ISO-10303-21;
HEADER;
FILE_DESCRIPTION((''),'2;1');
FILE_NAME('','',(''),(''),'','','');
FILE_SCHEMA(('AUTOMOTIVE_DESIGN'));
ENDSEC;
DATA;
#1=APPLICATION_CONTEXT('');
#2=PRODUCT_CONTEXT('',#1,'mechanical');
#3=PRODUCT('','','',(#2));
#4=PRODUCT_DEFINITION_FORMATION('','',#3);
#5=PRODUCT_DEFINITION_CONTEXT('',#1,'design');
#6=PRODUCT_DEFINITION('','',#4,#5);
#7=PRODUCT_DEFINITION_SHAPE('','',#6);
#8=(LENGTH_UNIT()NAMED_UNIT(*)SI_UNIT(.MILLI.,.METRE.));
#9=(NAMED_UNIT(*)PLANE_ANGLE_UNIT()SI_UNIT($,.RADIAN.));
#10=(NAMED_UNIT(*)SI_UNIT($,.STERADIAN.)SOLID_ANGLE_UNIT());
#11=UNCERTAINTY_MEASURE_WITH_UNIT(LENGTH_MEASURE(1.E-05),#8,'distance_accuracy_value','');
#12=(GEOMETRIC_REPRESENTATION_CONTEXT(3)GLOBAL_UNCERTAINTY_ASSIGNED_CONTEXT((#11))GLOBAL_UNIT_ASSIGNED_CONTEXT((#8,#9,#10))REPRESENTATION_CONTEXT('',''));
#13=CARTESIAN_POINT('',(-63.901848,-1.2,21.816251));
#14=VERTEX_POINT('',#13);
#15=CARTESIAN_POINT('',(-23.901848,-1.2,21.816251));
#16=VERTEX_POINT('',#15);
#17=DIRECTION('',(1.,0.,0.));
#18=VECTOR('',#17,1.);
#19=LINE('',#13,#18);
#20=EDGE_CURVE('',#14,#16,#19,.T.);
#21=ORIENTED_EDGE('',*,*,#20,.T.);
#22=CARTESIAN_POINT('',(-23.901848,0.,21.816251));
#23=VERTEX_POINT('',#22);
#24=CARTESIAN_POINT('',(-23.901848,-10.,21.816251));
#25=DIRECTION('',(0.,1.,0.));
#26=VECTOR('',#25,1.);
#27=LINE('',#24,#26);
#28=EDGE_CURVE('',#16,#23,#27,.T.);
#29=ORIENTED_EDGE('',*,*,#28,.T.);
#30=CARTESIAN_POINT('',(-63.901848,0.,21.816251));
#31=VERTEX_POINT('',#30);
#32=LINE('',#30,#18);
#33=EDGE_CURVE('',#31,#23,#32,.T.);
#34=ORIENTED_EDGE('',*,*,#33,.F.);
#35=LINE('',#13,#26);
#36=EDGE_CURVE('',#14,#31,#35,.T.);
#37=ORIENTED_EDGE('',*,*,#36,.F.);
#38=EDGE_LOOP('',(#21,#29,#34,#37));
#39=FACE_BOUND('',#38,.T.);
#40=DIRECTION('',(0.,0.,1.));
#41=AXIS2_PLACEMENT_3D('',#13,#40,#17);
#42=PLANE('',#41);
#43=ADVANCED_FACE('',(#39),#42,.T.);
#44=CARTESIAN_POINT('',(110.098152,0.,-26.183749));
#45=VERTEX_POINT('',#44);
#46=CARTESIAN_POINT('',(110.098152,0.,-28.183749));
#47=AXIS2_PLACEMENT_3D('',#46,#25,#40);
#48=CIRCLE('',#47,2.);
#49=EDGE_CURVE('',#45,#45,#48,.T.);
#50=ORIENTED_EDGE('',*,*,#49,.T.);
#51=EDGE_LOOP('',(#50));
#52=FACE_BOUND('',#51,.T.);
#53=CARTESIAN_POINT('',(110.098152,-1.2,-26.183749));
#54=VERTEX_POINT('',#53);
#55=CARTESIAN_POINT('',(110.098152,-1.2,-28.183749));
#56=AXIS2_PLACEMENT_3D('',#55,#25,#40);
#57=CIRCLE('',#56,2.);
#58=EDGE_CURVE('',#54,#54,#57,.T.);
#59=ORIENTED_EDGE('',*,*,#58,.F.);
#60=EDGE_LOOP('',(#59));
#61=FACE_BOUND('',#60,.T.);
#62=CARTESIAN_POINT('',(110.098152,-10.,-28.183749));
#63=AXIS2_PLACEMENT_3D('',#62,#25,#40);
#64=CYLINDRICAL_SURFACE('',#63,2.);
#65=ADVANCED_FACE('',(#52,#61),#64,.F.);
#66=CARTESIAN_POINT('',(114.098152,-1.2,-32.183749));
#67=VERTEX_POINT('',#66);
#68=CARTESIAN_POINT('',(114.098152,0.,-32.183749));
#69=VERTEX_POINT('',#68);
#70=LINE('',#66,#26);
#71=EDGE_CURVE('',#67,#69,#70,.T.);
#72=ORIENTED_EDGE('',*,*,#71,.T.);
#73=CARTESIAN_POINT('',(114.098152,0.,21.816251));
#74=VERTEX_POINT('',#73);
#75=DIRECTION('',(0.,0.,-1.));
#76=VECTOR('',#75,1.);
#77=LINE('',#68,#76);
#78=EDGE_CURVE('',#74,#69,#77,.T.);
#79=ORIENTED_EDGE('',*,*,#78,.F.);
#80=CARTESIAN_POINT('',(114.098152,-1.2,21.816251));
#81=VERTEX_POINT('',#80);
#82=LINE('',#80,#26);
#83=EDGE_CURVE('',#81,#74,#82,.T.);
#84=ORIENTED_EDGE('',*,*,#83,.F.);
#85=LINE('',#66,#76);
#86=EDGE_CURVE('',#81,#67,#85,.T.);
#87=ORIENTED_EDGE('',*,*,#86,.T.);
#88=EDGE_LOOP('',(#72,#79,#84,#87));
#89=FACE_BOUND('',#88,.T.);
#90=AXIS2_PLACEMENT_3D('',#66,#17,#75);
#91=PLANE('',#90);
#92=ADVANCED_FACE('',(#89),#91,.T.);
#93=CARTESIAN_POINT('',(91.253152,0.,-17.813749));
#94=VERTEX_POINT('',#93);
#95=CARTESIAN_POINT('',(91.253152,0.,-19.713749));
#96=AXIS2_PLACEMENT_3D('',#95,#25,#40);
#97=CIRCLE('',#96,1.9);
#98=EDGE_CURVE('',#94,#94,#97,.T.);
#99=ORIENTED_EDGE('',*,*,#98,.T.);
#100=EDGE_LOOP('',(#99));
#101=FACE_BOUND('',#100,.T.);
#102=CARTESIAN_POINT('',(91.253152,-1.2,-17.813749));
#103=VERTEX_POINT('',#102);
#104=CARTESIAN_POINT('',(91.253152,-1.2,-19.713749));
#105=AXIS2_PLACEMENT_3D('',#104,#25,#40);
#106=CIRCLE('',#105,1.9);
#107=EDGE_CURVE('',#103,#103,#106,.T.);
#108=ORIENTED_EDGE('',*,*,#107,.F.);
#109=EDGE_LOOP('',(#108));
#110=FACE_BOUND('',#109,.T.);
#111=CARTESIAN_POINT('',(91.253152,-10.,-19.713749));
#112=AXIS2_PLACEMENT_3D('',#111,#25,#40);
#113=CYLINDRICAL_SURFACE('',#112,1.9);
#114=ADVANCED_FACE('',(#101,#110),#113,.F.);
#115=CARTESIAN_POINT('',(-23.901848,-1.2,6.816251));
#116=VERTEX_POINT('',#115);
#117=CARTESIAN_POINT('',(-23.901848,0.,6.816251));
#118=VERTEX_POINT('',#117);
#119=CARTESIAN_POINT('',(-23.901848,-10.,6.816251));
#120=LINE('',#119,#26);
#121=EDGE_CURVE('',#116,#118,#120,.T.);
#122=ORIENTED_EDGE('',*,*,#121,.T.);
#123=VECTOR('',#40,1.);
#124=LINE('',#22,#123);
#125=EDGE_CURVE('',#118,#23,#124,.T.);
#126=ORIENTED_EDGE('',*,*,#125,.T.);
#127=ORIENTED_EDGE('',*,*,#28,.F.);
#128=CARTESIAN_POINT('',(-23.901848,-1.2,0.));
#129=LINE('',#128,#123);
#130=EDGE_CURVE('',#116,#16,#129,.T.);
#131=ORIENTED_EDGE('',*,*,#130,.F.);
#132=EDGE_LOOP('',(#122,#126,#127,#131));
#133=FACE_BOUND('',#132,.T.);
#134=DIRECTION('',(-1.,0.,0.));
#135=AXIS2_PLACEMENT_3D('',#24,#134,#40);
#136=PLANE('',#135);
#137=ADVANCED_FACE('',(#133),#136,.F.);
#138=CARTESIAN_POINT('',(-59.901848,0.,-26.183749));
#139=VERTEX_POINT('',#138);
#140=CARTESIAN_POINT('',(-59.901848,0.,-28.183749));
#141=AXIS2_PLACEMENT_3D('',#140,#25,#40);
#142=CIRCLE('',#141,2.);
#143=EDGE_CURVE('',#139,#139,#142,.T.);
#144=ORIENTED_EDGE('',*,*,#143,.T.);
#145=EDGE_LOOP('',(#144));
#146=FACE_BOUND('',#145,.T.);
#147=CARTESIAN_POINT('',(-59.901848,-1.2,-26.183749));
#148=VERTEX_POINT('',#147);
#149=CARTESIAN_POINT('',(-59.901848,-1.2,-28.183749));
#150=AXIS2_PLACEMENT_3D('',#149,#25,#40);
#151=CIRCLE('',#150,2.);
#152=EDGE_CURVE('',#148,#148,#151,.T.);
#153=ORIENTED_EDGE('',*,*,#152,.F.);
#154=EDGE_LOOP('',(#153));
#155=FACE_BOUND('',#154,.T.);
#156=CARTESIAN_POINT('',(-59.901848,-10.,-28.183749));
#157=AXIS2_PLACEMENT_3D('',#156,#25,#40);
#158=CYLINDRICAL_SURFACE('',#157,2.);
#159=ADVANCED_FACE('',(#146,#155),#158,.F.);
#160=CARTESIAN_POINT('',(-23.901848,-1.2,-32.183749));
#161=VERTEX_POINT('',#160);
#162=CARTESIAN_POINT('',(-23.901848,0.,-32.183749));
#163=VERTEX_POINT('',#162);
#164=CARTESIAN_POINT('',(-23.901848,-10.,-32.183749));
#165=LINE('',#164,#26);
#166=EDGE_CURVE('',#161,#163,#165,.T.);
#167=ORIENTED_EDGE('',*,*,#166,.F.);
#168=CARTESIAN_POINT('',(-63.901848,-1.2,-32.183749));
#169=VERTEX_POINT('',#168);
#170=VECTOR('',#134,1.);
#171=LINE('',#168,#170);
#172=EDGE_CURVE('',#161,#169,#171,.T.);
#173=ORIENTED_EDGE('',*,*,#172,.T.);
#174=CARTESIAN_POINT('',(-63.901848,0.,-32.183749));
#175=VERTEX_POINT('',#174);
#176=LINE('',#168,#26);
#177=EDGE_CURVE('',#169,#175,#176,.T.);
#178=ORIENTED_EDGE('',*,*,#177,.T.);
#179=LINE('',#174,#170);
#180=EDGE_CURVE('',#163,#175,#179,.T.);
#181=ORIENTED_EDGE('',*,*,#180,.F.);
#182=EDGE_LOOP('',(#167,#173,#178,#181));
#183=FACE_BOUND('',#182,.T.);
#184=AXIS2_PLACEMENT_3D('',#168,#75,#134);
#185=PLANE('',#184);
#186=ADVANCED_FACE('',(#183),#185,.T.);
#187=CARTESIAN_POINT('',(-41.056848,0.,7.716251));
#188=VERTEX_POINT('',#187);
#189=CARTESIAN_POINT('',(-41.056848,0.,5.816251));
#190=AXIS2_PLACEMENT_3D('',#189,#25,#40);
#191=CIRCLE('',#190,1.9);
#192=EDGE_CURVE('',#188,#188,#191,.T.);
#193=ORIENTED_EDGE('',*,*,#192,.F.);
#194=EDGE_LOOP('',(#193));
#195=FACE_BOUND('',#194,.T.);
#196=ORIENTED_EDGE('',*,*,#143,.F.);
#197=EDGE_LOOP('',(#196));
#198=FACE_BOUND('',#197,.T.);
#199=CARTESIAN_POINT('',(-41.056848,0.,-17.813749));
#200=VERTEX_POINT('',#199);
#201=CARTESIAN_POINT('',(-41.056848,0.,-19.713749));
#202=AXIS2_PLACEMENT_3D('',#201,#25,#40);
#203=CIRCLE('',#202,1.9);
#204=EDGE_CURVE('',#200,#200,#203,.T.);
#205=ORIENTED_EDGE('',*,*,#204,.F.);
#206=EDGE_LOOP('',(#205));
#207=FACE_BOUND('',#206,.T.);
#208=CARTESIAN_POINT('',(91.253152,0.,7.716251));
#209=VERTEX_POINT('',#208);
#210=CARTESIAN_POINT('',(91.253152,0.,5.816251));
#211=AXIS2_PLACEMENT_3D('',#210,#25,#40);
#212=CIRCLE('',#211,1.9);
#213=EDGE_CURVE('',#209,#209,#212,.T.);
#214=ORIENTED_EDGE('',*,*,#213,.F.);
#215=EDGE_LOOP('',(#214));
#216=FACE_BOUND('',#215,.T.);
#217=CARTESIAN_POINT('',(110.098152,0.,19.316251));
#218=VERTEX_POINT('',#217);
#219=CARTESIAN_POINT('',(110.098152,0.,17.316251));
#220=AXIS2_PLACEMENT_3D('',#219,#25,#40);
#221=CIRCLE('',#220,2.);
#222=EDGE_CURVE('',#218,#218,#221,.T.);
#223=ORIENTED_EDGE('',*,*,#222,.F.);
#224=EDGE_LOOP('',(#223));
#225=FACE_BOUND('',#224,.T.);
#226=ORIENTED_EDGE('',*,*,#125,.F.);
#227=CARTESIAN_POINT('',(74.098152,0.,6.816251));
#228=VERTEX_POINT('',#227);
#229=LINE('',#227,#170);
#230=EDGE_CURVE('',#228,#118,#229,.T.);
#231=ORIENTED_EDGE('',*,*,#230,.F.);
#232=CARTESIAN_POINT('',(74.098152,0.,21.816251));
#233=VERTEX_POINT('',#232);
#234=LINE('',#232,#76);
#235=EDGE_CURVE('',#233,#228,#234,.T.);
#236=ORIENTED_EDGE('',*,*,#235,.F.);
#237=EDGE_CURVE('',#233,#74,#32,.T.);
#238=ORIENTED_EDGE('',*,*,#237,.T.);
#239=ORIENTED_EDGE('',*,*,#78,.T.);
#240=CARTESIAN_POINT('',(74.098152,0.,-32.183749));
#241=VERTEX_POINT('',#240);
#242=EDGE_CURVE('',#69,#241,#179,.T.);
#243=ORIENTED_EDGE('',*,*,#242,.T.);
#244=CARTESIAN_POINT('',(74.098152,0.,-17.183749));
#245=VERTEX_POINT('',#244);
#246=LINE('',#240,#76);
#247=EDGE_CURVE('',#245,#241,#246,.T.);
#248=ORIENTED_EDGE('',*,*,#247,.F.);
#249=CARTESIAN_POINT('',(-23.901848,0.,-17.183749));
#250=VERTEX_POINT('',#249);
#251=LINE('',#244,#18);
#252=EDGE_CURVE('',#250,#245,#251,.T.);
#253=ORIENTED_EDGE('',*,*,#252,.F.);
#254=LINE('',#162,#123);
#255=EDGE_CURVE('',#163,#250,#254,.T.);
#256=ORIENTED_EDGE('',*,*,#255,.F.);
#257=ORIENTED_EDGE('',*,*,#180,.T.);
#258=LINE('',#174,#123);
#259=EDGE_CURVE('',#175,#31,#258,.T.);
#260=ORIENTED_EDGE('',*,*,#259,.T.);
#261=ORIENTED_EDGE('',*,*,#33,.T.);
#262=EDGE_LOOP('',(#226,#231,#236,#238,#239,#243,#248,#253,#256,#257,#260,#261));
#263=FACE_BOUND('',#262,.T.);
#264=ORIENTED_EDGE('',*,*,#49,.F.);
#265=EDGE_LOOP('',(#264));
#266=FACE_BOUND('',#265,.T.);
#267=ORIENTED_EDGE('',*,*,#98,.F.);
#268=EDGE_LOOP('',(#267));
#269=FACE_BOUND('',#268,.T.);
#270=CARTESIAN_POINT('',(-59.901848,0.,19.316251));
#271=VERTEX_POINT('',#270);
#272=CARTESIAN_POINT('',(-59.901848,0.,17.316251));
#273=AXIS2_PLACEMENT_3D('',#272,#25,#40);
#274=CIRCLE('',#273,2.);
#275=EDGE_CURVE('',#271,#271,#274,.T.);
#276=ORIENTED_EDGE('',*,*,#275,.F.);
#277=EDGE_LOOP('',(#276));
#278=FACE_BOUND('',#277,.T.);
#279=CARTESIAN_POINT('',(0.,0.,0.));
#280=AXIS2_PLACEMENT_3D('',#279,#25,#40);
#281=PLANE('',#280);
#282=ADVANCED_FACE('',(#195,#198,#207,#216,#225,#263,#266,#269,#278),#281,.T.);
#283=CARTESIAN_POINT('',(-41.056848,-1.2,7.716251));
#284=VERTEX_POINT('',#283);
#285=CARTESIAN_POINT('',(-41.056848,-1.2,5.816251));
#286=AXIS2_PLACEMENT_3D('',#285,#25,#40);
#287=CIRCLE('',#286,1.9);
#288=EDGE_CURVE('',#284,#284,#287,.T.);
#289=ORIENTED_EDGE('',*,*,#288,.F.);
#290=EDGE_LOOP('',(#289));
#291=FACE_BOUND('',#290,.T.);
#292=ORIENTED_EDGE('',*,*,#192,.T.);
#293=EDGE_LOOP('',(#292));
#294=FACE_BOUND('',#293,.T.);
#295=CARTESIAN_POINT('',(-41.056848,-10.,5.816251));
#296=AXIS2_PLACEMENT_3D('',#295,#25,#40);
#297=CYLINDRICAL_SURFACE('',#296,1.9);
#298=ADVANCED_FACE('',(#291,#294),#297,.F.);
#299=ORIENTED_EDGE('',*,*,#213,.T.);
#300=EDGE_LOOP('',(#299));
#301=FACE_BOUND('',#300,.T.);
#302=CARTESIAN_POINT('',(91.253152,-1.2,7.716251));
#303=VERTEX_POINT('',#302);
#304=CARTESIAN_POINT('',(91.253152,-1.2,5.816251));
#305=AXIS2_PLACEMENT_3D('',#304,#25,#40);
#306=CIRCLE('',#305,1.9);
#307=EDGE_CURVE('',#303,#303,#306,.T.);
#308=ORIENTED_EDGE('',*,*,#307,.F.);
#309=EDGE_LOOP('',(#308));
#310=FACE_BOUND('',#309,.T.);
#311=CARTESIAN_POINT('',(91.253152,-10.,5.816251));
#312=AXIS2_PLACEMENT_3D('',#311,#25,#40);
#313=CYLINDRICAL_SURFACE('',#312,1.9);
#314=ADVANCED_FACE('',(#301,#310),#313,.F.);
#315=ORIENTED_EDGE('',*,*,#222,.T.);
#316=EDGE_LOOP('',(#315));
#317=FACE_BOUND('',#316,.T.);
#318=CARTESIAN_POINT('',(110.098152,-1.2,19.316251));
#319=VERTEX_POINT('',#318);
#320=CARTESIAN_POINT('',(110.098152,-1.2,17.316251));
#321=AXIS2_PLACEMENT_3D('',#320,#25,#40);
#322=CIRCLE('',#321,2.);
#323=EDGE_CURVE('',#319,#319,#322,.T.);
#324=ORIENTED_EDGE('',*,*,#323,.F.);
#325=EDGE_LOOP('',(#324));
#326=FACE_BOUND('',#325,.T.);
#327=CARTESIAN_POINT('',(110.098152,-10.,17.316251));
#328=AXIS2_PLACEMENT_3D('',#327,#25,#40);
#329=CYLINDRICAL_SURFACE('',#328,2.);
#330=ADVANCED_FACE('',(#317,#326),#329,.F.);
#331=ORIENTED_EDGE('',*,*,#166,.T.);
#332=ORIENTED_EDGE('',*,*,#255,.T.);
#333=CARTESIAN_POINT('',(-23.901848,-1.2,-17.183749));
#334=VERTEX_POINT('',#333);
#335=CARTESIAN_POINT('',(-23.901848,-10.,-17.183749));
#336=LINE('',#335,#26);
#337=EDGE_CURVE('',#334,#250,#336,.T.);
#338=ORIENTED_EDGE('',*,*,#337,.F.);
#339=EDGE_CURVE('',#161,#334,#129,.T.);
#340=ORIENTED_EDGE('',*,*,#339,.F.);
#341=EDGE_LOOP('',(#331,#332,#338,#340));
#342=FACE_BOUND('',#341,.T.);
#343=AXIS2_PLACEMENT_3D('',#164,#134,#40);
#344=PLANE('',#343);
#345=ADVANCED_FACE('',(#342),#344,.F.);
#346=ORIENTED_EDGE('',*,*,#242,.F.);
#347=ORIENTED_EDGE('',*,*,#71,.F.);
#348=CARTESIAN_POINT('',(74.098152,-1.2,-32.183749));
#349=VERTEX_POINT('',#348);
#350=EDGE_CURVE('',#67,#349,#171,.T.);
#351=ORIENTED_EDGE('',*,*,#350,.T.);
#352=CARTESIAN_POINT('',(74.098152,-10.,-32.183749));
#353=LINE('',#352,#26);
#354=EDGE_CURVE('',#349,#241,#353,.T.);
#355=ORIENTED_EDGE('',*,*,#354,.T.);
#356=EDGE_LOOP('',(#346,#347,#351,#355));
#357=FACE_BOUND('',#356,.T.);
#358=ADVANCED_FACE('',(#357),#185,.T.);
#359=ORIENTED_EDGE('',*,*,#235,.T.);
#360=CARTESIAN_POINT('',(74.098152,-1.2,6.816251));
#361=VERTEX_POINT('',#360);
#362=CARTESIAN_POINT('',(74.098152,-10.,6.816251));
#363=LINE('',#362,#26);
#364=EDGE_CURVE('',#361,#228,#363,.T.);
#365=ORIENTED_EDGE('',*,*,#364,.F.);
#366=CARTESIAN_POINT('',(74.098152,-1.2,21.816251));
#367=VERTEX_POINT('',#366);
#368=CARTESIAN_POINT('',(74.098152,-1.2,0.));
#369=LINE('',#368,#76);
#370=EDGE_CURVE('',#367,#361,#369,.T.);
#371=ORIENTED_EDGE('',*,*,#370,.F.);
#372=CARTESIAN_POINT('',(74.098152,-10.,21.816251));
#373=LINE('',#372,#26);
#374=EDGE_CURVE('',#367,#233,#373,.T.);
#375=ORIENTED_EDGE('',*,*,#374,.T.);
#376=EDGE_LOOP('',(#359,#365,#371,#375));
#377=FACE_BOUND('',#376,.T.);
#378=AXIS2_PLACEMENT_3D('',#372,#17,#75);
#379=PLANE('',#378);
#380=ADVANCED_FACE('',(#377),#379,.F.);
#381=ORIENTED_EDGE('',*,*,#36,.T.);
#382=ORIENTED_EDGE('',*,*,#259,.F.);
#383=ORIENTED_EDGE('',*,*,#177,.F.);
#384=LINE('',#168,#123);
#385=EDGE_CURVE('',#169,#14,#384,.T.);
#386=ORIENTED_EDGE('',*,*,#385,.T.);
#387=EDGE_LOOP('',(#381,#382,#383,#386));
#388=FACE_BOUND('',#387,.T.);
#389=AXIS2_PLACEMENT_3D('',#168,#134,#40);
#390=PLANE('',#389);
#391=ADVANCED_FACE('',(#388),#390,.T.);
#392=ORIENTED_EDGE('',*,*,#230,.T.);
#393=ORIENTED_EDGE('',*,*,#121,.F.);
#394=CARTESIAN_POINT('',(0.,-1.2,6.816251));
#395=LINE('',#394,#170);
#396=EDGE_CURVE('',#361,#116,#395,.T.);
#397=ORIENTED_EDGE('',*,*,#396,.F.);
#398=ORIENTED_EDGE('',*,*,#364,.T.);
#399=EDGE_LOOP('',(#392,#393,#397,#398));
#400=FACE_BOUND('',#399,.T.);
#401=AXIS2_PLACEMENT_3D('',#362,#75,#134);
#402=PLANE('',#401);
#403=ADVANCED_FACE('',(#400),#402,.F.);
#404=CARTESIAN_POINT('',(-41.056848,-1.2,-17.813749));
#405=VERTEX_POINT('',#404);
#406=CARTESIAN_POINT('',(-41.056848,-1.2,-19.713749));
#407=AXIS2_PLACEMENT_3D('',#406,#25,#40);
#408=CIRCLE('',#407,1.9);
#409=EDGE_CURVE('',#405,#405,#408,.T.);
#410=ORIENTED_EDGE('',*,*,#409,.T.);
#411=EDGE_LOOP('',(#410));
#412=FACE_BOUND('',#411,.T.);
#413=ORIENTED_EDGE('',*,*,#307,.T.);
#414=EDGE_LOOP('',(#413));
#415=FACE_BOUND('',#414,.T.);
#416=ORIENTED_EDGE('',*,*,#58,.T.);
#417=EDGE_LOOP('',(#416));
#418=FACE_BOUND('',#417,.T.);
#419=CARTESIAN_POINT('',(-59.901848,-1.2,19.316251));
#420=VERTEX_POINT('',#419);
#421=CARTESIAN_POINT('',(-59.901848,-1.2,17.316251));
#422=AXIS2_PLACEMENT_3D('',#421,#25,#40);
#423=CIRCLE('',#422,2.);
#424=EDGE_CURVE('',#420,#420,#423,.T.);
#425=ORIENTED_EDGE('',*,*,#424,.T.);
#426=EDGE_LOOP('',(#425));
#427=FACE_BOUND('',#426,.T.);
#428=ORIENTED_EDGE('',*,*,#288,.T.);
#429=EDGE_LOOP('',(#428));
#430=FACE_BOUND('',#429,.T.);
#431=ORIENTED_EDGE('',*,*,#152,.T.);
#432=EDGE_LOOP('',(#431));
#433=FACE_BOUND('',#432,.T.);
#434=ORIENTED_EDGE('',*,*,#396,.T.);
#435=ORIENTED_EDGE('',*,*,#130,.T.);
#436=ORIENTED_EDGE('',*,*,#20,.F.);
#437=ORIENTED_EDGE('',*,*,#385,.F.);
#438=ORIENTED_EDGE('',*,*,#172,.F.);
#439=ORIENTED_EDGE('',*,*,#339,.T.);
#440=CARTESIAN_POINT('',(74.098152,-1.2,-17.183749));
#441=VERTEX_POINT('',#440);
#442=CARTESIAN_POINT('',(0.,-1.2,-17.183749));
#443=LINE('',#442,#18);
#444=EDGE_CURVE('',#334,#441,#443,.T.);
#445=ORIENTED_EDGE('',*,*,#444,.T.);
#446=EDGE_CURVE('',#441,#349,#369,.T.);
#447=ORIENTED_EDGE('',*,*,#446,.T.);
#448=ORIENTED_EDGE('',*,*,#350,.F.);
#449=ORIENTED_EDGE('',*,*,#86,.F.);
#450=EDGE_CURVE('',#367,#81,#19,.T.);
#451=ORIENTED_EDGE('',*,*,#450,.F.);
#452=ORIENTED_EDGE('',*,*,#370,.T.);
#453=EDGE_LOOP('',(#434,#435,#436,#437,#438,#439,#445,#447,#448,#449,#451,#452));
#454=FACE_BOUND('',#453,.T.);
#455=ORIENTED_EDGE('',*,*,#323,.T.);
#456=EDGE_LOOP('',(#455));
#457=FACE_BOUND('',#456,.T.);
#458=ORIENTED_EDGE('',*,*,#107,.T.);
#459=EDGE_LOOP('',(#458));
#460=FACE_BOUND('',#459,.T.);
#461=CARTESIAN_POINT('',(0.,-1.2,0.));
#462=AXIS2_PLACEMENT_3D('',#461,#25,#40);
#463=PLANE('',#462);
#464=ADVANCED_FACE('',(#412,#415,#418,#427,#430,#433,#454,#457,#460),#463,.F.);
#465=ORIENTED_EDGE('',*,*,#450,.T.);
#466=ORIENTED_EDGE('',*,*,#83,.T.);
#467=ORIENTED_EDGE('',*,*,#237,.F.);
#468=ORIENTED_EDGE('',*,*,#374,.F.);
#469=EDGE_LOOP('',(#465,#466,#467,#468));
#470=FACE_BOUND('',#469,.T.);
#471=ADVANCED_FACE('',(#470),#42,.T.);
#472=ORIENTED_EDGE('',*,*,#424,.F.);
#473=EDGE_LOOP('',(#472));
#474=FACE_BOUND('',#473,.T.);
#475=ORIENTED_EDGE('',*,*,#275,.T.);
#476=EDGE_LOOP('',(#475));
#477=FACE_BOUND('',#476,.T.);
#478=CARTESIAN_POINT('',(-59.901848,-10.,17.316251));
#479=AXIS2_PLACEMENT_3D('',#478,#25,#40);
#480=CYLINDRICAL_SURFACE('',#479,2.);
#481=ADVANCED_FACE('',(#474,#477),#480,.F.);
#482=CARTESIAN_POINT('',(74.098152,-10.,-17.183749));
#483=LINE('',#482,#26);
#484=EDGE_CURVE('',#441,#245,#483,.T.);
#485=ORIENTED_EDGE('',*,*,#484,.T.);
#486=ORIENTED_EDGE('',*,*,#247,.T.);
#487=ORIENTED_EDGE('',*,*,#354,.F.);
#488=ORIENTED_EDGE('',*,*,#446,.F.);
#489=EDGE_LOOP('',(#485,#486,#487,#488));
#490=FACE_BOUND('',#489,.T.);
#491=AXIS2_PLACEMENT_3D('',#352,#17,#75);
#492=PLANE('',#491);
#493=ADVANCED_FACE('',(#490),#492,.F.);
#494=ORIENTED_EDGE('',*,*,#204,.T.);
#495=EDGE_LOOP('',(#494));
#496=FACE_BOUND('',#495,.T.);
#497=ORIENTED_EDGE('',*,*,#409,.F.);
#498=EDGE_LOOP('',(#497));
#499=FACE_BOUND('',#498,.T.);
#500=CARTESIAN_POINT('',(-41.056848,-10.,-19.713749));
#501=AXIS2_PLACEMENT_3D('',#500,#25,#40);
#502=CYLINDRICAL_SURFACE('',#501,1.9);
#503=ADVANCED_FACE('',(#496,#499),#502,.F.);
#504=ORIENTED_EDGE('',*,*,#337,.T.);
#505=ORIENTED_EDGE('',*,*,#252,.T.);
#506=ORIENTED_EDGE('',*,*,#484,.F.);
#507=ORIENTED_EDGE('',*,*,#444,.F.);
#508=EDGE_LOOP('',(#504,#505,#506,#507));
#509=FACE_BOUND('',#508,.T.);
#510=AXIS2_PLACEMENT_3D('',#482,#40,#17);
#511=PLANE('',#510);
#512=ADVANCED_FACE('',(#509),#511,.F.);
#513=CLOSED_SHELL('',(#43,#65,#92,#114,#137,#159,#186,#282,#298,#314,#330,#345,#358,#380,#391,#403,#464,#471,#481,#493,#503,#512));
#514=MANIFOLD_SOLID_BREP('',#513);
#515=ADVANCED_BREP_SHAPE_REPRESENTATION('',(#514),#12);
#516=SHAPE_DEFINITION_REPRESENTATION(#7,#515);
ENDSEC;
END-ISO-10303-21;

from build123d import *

# Parameters (mm, degrees)
SKETCH1_W          = 178
SKETCH1_H          = 54
BASE_FLANGE1_DEPTH = 1.2
SKETCH2_R          = 1.9
CUT_EXTRUDE1_DEPTH = 10
SKETCH3_W          = 98
SKETCH3_H          = 15
CUT_EXTRUDE2_DEPTH = 10
SKETCH4_R          = 2
CUT_EXTRUDE3_DEPTH = 10
SKETCH5_R          = 2
CUT_EXTRUDE4_DEPTH = 10


# Sheet-metal steps are written as plain solids
with BuildPart() as part:
    # Sketch1 → Base-Flange1 (new body)
    with BuildSketch(Plane(origin=(0, 0, 0), x_dir=(1, 0, 0), z_dir=(0, 1, 0))):
        with Locations((25.098152401, 5.183748797)):
            Rectangle(SKETCH1_W, SKETCH1_H)
    extrude(amount=-BASE_FLANGE1_DEPTH)

    # Sketch2 → Cut-Extrude1 (cut)
    with BuildSketch(Plane(origin=(0, 0, 0), x_dir=(1, 0, 0), z_dir=(0, 1, 0))):
        with Locations(Location((91.253152401, -5.816251203, 0), (0, 0, 270))):
            Circle(SKETCH2_R)
        with Locations(Location((-41.056847599, -5.816251203, 0), (0, 0, 270))):
            Circle(SKETCH2_R)
        with Locations(Location((91.253152401, 19.713748797, 0), (0, 0, 270))):
            Circle(SKETCH2_R)
        with Locations(Location((-41.056847599, 19.713748797, 0), (0, 0, 270))):
            Circle(SKETCH2_R)
    extrude(amount=-CUT_EXTRUDE1_DEPTH, mode=Mode.SUBTRACT)

    # Sketch3 → Cut-Extrude2 (cut)
    with BuildSketch(Plane(origin=(0, 0, 0), x_dir=(1, 0, 0), z_dir=(0, 1, 0))):
        with Locations((25.098152401, -14.316251203)):
            Rectangle(SKETCH3_W, SKETCH3_H)
        with Locations((25.098152401, 24.683748797)):
            Rectangle(SKETCH3_W, SKETCH3_H)
    extrude(amount=-CUT_EXTRUDE2_DEPTH, mode=Mode.SUBTRACT)

    # Sketch4 → Cut-Extrude3 (cut)
    with BuildSketch(Plane(origin=(0, 0, 0), x_dir=(1, 0, 0), z_dir=(0, 1, 0))):
        with Locations(Location((110.098152401, -17.316251203, 0), (0, 0, 270))):
            Circle(SKETCH4_R)
        with Locations(Location((110.098152401, 28.183748797, 0), (0, 0, 270))):
            Circle(SKETCH4_R)
    extrude(amount=-CUT_EXTRUDE3_DEPTH, mode=Mode.SUBTRACT)

    # Sketch5 → Cut-Extrude4 (cut)
    with BuildSketch(Plane(origin=(0, 0, 0), x_dir=(1, 0, 0), z_dir=(0, 1, 0))):
        with Locations(Location((-59.901847599, -17.316251203, 0), (0, 0, 270))):
            Circle(SKETCH5_R)
        with Locations(Location((-59.901847599, 28.183748797, 0), (0, 0, 270))):
            Circle(SKETCH5_R)
    extrude(amount=-CUT_EXTRUDE4_DEPTH, mode=Mode.SUBTRACT)


solid = part.part
